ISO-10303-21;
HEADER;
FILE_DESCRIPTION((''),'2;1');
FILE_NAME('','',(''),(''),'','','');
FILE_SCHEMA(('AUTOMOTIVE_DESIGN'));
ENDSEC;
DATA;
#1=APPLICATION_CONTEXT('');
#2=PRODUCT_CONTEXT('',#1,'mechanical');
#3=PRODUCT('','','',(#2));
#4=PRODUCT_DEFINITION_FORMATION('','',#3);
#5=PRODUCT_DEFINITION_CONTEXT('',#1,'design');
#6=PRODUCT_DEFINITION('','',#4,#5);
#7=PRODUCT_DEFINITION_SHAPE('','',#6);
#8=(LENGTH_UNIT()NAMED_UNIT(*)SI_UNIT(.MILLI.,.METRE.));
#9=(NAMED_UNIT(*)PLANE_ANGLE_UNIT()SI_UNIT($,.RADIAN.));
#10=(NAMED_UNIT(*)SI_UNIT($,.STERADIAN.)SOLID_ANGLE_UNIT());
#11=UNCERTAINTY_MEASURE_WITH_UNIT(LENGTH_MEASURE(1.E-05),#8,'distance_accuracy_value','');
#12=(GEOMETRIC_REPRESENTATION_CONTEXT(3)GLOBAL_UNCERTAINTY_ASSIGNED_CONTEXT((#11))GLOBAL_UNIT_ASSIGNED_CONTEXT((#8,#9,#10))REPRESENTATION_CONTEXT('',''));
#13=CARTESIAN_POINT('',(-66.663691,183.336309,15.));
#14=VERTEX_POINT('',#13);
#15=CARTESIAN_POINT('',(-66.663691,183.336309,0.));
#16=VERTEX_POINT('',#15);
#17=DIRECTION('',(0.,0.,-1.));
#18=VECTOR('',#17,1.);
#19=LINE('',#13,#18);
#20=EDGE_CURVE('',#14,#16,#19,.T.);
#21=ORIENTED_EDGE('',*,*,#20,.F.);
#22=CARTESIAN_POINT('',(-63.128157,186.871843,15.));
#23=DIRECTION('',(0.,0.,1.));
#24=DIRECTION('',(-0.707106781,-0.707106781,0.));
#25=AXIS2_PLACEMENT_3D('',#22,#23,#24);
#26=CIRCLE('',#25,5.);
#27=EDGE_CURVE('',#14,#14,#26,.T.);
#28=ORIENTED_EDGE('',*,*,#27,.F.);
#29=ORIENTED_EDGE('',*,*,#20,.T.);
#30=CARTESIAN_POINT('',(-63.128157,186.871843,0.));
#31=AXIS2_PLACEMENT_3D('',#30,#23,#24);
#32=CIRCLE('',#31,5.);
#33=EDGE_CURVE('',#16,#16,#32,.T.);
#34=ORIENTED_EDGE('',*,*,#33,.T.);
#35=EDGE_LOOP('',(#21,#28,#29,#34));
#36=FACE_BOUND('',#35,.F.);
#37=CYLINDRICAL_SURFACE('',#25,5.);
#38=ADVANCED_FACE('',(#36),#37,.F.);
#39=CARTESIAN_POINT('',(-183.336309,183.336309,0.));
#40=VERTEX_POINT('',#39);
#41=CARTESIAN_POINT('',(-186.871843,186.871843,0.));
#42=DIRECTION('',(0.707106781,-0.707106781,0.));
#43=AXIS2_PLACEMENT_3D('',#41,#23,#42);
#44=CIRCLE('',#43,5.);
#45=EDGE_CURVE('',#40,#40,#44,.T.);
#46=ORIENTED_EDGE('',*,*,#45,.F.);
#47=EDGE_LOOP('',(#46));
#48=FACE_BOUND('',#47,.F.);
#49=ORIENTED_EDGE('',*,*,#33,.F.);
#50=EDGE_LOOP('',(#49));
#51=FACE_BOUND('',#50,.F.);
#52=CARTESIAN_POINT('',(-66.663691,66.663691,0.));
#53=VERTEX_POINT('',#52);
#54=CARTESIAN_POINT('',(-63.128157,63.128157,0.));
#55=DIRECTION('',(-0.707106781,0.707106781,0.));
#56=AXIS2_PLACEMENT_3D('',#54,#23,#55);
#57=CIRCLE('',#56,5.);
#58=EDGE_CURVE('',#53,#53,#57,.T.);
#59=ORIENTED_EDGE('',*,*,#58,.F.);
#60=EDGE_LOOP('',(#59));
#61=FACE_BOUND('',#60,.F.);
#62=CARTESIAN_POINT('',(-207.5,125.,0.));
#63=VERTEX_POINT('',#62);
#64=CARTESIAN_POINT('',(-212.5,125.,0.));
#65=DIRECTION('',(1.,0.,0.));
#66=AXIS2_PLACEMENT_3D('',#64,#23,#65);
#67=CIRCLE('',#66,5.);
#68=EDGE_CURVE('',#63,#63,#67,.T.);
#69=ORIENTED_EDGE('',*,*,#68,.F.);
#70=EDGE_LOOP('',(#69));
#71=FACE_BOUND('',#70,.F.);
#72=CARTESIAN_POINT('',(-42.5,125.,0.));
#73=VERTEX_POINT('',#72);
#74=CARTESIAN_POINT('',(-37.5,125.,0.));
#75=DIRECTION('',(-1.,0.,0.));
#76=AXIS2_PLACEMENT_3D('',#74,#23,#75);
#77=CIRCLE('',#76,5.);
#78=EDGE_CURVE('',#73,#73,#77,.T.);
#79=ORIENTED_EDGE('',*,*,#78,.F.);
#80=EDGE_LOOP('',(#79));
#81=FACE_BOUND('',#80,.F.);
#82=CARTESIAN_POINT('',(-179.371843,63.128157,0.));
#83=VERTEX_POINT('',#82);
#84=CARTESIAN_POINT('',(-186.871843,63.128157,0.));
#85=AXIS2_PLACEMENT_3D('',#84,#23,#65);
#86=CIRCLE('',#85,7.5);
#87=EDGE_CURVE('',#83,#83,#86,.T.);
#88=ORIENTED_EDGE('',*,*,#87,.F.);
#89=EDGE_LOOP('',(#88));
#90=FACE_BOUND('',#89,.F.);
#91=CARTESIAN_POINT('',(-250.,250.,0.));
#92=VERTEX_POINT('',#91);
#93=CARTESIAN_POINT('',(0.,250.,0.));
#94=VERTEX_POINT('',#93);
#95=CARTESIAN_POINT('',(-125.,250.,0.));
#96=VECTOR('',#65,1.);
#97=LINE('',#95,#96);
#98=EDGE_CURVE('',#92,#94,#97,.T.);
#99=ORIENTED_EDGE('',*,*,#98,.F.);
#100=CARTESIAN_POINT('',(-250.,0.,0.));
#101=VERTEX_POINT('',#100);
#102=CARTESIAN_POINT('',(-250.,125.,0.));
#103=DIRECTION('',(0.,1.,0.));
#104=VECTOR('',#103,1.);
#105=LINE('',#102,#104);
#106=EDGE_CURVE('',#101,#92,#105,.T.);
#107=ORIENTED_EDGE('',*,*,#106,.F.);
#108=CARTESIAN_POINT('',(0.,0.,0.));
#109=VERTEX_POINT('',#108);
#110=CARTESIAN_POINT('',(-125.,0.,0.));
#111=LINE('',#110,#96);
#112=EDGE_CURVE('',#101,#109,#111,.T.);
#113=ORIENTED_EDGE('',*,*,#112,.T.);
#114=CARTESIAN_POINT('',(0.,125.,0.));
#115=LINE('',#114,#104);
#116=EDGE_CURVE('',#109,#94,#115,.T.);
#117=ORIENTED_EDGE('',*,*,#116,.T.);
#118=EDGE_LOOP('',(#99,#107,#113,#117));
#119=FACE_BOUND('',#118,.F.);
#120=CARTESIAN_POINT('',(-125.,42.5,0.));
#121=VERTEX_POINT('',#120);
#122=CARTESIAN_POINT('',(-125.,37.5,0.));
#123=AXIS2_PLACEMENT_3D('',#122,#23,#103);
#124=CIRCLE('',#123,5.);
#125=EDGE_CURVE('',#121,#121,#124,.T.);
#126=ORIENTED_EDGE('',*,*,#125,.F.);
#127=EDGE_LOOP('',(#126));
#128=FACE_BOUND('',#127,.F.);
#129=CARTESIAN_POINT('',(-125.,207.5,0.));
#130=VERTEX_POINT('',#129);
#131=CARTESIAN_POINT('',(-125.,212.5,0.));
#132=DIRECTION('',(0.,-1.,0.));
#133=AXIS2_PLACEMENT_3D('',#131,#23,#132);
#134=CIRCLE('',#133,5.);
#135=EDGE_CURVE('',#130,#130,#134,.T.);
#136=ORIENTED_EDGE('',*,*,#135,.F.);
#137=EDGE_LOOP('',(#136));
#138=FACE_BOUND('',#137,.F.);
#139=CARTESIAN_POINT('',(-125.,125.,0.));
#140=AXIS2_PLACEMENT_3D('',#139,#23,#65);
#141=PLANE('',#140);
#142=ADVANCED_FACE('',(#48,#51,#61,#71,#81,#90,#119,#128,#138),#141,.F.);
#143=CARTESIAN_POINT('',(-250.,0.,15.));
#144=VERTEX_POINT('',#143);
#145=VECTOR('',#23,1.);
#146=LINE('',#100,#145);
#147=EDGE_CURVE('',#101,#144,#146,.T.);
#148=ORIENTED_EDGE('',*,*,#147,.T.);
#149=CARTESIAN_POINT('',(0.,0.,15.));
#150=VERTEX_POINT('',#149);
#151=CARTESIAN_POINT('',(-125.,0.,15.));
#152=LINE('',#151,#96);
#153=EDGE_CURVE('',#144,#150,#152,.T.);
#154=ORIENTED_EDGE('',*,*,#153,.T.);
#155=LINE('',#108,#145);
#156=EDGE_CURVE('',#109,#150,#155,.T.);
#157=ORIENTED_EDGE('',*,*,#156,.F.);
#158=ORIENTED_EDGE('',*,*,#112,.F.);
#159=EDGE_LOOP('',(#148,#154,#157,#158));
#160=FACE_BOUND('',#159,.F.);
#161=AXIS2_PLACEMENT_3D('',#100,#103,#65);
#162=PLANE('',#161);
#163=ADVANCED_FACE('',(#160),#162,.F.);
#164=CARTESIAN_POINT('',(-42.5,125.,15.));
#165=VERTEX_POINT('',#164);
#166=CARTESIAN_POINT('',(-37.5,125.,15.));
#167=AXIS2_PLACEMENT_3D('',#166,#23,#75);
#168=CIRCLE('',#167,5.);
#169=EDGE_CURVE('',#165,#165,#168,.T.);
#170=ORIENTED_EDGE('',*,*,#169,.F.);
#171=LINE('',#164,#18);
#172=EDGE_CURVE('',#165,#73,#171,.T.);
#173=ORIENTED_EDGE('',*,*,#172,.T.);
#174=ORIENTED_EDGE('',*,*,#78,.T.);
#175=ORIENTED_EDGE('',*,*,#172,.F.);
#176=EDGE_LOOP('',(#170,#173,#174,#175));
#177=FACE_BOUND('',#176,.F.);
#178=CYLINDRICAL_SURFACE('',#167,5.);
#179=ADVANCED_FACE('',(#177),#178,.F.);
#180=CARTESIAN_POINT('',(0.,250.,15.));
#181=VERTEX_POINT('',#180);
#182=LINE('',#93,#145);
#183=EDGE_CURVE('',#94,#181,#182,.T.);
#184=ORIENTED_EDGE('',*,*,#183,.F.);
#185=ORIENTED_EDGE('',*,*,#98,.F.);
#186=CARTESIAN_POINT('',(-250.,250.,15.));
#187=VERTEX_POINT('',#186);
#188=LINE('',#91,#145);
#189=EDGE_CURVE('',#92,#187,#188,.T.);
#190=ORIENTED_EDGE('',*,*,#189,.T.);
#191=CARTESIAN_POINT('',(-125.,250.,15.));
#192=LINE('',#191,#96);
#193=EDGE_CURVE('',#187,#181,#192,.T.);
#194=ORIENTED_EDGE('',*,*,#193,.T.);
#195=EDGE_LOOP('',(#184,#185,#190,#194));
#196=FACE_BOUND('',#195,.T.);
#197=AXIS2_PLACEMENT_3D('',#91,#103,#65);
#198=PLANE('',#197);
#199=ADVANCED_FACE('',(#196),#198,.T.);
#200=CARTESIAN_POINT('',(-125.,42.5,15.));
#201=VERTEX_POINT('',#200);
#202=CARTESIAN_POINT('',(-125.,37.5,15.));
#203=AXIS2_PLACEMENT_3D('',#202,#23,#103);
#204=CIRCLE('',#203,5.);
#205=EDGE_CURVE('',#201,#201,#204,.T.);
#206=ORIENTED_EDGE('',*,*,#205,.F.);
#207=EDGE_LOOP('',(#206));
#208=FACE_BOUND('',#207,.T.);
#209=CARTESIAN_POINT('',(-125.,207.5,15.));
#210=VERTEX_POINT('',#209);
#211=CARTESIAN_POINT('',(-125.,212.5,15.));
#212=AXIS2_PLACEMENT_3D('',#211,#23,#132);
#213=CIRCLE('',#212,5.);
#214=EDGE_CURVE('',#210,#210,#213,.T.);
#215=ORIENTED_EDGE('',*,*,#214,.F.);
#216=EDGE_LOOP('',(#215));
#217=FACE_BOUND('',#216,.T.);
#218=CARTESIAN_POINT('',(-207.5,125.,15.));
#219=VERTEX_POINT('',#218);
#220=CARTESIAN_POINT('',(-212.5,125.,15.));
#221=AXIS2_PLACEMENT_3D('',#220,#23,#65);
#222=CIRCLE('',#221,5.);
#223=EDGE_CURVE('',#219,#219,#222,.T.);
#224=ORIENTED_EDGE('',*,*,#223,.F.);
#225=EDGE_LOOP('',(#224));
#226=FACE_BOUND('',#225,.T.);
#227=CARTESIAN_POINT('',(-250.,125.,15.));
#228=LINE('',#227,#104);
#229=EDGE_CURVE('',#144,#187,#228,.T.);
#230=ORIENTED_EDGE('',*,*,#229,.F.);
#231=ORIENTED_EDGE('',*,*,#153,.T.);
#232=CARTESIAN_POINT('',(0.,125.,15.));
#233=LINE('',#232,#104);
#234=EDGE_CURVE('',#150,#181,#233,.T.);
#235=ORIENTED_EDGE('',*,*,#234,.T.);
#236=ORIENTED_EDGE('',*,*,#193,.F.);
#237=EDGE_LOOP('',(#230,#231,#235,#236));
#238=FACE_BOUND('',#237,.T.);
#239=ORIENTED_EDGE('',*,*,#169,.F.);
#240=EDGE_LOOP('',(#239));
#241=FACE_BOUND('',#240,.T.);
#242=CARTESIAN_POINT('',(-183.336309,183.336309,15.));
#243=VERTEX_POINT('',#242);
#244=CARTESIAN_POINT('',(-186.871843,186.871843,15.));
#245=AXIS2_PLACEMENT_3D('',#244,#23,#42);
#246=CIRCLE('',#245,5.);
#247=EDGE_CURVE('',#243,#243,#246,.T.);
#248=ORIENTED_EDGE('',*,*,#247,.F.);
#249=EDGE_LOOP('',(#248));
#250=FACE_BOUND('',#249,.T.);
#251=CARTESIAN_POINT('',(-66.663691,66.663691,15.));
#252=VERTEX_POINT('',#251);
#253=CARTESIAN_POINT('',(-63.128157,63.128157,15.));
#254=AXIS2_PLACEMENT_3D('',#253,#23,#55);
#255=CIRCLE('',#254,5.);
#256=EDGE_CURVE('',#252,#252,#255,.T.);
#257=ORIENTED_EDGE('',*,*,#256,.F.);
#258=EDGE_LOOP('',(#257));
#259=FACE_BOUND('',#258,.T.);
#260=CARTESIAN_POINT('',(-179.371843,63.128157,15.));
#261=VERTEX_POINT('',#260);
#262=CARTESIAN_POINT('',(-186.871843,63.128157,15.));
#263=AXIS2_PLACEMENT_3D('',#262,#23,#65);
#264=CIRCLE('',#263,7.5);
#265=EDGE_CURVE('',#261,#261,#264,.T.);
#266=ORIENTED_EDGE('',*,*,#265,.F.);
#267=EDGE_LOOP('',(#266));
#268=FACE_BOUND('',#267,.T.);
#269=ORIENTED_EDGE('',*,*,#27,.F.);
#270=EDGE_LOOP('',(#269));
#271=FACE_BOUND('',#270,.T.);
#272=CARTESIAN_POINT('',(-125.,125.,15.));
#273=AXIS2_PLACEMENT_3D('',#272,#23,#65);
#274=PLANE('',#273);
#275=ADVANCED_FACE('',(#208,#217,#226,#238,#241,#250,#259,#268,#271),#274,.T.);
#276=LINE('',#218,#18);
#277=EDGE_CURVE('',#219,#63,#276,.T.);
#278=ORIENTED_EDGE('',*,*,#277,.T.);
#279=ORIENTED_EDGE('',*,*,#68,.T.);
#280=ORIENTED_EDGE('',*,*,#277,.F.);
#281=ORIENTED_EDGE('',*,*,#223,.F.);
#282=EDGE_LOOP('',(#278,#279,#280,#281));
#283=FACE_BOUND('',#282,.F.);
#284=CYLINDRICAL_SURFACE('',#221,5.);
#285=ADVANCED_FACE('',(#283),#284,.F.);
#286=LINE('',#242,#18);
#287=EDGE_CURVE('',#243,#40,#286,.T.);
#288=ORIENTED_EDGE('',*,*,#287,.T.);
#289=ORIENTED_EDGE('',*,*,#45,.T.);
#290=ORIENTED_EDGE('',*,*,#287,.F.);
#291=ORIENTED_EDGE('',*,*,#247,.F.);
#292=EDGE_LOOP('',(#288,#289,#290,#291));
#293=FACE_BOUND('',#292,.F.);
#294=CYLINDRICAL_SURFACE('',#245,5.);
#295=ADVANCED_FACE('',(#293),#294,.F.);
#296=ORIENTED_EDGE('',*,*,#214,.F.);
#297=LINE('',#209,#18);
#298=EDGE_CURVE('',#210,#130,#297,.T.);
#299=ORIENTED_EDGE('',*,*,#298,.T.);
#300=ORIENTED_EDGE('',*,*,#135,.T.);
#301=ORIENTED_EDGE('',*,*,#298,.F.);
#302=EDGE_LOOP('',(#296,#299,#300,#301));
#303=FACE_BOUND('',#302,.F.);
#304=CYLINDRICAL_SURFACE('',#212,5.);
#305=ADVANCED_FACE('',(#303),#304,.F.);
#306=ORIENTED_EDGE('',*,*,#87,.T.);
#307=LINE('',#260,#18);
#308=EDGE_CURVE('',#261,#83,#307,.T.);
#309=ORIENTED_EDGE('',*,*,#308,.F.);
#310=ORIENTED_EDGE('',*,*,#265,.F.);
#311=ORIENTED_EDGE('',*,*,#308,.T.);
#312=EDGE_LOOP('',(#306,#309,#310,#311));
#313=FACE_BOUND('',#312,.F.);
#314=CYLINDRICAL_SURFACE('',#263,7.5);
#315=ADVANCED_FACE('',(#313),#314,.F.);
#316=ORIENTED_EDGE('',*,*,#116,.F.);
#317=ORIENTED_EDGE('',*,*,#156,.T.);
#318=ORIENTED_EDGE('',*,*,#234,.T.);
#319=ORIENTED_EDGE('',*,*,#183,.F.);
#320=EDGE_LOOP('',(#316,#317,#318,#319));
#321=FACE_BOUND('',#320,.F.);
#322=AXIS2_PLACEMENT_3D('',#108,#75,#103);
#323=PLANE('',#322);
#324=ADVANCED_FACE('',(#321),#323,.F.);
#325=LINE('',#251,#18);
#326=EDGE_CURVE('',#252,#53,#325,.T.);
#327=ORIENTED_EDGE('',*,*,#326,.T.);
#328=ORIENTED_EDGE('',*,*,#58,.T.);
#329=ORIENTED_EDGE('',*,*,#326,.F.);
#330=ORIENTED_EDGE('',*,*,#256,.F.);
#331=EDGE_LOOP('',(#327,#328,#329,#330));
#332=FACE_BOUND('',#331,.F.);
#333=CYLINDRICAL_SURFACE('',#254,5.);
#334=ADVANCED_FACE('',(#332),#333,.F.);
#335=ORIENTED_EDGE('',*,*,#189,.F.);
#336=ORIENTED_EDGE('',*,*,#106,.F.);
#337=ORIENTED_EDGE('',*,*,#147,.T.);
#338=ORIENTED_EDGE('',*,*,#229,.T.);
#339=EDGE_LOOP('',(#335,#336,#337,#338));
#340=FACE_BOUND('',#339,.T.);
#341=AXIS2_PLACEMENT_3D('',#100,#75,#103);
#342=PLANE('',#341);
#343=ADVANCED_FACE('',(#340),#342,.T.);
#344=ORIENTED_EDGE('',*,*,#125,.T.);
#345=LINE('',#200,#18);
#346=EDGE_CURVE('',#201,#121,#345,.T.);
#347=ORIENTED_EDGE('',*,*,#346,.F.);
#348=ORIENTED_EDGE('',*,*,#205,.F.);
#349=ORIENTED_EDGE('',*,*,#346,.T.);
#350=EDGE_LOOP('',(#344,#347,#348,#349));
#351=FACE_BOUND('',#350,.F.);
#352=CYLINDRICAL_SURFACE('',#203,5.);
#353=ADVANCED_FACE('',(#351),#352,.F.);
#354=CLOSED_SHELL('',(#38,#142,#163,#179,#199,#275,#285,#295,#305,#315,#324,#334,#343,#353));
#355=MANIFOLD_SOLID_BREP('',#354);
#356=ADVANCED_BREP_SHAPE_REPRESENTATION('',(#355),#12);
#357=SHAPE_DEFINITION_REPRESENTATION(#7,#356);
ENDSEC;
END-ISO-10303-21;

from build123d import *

# Parameters (mm, degrees)
F0_W            = 250
F0_H            = 250
F1_DEPTH        = 15
F5_R            = 5
F6_DEPTH        = 15.001
F6_COPIES_COUNT = 7
F6_COPIES_ANGLE = 270
F8_R            = 7.5
F9_DEPTH        = 15.001


# Not quite as in the source:
# - a pattern or mirror of a feature is missing from the dataset's text; its kind, count and spacing are read off the source's solid


with BuildPart() as f1:
    # F0 (on Top) → F1 (new body)
    with BuildSketch(Plane.XY):
        with Locations((-125, 125)):
            Rectangle(F0_W, F0_H)
    extrude(amount=F1_DEPTH)

    # F5 (on face) → F6 (cut, through all)
    with BuildSketch(Plane.XY.offset(15)):
        with Locations((-212.5, 125)):
            Circle(F5_R)
    f6 = extrude(amount=-F6_DEPTH, mode=Mode.SUBTRACT)

    # F6_copies: F6 ×7 about axis
    f6_copies_axis = Axis((-125, 125, 0), (0, 0, -1))
    for i in range(1, F6_COPIES_COUNT):
        add(f6.rotate(f6_copies_axis, i * F6_COPIES_ANGLE / (F6_COPIES_COUNT - 1)), mode=Mode.SUBTRACT)

    # F8 (on face) → F9 (cut, through all)
    with BuildSketch(Plane.XY.offset(15)):
        with Locations((-186.8718433538, 63.1281566462)):
            Circle(F8_R)
    extrude(amount=-F9_DEPTH, mode=Mode.SUBTRACT)


solid = f1.part
